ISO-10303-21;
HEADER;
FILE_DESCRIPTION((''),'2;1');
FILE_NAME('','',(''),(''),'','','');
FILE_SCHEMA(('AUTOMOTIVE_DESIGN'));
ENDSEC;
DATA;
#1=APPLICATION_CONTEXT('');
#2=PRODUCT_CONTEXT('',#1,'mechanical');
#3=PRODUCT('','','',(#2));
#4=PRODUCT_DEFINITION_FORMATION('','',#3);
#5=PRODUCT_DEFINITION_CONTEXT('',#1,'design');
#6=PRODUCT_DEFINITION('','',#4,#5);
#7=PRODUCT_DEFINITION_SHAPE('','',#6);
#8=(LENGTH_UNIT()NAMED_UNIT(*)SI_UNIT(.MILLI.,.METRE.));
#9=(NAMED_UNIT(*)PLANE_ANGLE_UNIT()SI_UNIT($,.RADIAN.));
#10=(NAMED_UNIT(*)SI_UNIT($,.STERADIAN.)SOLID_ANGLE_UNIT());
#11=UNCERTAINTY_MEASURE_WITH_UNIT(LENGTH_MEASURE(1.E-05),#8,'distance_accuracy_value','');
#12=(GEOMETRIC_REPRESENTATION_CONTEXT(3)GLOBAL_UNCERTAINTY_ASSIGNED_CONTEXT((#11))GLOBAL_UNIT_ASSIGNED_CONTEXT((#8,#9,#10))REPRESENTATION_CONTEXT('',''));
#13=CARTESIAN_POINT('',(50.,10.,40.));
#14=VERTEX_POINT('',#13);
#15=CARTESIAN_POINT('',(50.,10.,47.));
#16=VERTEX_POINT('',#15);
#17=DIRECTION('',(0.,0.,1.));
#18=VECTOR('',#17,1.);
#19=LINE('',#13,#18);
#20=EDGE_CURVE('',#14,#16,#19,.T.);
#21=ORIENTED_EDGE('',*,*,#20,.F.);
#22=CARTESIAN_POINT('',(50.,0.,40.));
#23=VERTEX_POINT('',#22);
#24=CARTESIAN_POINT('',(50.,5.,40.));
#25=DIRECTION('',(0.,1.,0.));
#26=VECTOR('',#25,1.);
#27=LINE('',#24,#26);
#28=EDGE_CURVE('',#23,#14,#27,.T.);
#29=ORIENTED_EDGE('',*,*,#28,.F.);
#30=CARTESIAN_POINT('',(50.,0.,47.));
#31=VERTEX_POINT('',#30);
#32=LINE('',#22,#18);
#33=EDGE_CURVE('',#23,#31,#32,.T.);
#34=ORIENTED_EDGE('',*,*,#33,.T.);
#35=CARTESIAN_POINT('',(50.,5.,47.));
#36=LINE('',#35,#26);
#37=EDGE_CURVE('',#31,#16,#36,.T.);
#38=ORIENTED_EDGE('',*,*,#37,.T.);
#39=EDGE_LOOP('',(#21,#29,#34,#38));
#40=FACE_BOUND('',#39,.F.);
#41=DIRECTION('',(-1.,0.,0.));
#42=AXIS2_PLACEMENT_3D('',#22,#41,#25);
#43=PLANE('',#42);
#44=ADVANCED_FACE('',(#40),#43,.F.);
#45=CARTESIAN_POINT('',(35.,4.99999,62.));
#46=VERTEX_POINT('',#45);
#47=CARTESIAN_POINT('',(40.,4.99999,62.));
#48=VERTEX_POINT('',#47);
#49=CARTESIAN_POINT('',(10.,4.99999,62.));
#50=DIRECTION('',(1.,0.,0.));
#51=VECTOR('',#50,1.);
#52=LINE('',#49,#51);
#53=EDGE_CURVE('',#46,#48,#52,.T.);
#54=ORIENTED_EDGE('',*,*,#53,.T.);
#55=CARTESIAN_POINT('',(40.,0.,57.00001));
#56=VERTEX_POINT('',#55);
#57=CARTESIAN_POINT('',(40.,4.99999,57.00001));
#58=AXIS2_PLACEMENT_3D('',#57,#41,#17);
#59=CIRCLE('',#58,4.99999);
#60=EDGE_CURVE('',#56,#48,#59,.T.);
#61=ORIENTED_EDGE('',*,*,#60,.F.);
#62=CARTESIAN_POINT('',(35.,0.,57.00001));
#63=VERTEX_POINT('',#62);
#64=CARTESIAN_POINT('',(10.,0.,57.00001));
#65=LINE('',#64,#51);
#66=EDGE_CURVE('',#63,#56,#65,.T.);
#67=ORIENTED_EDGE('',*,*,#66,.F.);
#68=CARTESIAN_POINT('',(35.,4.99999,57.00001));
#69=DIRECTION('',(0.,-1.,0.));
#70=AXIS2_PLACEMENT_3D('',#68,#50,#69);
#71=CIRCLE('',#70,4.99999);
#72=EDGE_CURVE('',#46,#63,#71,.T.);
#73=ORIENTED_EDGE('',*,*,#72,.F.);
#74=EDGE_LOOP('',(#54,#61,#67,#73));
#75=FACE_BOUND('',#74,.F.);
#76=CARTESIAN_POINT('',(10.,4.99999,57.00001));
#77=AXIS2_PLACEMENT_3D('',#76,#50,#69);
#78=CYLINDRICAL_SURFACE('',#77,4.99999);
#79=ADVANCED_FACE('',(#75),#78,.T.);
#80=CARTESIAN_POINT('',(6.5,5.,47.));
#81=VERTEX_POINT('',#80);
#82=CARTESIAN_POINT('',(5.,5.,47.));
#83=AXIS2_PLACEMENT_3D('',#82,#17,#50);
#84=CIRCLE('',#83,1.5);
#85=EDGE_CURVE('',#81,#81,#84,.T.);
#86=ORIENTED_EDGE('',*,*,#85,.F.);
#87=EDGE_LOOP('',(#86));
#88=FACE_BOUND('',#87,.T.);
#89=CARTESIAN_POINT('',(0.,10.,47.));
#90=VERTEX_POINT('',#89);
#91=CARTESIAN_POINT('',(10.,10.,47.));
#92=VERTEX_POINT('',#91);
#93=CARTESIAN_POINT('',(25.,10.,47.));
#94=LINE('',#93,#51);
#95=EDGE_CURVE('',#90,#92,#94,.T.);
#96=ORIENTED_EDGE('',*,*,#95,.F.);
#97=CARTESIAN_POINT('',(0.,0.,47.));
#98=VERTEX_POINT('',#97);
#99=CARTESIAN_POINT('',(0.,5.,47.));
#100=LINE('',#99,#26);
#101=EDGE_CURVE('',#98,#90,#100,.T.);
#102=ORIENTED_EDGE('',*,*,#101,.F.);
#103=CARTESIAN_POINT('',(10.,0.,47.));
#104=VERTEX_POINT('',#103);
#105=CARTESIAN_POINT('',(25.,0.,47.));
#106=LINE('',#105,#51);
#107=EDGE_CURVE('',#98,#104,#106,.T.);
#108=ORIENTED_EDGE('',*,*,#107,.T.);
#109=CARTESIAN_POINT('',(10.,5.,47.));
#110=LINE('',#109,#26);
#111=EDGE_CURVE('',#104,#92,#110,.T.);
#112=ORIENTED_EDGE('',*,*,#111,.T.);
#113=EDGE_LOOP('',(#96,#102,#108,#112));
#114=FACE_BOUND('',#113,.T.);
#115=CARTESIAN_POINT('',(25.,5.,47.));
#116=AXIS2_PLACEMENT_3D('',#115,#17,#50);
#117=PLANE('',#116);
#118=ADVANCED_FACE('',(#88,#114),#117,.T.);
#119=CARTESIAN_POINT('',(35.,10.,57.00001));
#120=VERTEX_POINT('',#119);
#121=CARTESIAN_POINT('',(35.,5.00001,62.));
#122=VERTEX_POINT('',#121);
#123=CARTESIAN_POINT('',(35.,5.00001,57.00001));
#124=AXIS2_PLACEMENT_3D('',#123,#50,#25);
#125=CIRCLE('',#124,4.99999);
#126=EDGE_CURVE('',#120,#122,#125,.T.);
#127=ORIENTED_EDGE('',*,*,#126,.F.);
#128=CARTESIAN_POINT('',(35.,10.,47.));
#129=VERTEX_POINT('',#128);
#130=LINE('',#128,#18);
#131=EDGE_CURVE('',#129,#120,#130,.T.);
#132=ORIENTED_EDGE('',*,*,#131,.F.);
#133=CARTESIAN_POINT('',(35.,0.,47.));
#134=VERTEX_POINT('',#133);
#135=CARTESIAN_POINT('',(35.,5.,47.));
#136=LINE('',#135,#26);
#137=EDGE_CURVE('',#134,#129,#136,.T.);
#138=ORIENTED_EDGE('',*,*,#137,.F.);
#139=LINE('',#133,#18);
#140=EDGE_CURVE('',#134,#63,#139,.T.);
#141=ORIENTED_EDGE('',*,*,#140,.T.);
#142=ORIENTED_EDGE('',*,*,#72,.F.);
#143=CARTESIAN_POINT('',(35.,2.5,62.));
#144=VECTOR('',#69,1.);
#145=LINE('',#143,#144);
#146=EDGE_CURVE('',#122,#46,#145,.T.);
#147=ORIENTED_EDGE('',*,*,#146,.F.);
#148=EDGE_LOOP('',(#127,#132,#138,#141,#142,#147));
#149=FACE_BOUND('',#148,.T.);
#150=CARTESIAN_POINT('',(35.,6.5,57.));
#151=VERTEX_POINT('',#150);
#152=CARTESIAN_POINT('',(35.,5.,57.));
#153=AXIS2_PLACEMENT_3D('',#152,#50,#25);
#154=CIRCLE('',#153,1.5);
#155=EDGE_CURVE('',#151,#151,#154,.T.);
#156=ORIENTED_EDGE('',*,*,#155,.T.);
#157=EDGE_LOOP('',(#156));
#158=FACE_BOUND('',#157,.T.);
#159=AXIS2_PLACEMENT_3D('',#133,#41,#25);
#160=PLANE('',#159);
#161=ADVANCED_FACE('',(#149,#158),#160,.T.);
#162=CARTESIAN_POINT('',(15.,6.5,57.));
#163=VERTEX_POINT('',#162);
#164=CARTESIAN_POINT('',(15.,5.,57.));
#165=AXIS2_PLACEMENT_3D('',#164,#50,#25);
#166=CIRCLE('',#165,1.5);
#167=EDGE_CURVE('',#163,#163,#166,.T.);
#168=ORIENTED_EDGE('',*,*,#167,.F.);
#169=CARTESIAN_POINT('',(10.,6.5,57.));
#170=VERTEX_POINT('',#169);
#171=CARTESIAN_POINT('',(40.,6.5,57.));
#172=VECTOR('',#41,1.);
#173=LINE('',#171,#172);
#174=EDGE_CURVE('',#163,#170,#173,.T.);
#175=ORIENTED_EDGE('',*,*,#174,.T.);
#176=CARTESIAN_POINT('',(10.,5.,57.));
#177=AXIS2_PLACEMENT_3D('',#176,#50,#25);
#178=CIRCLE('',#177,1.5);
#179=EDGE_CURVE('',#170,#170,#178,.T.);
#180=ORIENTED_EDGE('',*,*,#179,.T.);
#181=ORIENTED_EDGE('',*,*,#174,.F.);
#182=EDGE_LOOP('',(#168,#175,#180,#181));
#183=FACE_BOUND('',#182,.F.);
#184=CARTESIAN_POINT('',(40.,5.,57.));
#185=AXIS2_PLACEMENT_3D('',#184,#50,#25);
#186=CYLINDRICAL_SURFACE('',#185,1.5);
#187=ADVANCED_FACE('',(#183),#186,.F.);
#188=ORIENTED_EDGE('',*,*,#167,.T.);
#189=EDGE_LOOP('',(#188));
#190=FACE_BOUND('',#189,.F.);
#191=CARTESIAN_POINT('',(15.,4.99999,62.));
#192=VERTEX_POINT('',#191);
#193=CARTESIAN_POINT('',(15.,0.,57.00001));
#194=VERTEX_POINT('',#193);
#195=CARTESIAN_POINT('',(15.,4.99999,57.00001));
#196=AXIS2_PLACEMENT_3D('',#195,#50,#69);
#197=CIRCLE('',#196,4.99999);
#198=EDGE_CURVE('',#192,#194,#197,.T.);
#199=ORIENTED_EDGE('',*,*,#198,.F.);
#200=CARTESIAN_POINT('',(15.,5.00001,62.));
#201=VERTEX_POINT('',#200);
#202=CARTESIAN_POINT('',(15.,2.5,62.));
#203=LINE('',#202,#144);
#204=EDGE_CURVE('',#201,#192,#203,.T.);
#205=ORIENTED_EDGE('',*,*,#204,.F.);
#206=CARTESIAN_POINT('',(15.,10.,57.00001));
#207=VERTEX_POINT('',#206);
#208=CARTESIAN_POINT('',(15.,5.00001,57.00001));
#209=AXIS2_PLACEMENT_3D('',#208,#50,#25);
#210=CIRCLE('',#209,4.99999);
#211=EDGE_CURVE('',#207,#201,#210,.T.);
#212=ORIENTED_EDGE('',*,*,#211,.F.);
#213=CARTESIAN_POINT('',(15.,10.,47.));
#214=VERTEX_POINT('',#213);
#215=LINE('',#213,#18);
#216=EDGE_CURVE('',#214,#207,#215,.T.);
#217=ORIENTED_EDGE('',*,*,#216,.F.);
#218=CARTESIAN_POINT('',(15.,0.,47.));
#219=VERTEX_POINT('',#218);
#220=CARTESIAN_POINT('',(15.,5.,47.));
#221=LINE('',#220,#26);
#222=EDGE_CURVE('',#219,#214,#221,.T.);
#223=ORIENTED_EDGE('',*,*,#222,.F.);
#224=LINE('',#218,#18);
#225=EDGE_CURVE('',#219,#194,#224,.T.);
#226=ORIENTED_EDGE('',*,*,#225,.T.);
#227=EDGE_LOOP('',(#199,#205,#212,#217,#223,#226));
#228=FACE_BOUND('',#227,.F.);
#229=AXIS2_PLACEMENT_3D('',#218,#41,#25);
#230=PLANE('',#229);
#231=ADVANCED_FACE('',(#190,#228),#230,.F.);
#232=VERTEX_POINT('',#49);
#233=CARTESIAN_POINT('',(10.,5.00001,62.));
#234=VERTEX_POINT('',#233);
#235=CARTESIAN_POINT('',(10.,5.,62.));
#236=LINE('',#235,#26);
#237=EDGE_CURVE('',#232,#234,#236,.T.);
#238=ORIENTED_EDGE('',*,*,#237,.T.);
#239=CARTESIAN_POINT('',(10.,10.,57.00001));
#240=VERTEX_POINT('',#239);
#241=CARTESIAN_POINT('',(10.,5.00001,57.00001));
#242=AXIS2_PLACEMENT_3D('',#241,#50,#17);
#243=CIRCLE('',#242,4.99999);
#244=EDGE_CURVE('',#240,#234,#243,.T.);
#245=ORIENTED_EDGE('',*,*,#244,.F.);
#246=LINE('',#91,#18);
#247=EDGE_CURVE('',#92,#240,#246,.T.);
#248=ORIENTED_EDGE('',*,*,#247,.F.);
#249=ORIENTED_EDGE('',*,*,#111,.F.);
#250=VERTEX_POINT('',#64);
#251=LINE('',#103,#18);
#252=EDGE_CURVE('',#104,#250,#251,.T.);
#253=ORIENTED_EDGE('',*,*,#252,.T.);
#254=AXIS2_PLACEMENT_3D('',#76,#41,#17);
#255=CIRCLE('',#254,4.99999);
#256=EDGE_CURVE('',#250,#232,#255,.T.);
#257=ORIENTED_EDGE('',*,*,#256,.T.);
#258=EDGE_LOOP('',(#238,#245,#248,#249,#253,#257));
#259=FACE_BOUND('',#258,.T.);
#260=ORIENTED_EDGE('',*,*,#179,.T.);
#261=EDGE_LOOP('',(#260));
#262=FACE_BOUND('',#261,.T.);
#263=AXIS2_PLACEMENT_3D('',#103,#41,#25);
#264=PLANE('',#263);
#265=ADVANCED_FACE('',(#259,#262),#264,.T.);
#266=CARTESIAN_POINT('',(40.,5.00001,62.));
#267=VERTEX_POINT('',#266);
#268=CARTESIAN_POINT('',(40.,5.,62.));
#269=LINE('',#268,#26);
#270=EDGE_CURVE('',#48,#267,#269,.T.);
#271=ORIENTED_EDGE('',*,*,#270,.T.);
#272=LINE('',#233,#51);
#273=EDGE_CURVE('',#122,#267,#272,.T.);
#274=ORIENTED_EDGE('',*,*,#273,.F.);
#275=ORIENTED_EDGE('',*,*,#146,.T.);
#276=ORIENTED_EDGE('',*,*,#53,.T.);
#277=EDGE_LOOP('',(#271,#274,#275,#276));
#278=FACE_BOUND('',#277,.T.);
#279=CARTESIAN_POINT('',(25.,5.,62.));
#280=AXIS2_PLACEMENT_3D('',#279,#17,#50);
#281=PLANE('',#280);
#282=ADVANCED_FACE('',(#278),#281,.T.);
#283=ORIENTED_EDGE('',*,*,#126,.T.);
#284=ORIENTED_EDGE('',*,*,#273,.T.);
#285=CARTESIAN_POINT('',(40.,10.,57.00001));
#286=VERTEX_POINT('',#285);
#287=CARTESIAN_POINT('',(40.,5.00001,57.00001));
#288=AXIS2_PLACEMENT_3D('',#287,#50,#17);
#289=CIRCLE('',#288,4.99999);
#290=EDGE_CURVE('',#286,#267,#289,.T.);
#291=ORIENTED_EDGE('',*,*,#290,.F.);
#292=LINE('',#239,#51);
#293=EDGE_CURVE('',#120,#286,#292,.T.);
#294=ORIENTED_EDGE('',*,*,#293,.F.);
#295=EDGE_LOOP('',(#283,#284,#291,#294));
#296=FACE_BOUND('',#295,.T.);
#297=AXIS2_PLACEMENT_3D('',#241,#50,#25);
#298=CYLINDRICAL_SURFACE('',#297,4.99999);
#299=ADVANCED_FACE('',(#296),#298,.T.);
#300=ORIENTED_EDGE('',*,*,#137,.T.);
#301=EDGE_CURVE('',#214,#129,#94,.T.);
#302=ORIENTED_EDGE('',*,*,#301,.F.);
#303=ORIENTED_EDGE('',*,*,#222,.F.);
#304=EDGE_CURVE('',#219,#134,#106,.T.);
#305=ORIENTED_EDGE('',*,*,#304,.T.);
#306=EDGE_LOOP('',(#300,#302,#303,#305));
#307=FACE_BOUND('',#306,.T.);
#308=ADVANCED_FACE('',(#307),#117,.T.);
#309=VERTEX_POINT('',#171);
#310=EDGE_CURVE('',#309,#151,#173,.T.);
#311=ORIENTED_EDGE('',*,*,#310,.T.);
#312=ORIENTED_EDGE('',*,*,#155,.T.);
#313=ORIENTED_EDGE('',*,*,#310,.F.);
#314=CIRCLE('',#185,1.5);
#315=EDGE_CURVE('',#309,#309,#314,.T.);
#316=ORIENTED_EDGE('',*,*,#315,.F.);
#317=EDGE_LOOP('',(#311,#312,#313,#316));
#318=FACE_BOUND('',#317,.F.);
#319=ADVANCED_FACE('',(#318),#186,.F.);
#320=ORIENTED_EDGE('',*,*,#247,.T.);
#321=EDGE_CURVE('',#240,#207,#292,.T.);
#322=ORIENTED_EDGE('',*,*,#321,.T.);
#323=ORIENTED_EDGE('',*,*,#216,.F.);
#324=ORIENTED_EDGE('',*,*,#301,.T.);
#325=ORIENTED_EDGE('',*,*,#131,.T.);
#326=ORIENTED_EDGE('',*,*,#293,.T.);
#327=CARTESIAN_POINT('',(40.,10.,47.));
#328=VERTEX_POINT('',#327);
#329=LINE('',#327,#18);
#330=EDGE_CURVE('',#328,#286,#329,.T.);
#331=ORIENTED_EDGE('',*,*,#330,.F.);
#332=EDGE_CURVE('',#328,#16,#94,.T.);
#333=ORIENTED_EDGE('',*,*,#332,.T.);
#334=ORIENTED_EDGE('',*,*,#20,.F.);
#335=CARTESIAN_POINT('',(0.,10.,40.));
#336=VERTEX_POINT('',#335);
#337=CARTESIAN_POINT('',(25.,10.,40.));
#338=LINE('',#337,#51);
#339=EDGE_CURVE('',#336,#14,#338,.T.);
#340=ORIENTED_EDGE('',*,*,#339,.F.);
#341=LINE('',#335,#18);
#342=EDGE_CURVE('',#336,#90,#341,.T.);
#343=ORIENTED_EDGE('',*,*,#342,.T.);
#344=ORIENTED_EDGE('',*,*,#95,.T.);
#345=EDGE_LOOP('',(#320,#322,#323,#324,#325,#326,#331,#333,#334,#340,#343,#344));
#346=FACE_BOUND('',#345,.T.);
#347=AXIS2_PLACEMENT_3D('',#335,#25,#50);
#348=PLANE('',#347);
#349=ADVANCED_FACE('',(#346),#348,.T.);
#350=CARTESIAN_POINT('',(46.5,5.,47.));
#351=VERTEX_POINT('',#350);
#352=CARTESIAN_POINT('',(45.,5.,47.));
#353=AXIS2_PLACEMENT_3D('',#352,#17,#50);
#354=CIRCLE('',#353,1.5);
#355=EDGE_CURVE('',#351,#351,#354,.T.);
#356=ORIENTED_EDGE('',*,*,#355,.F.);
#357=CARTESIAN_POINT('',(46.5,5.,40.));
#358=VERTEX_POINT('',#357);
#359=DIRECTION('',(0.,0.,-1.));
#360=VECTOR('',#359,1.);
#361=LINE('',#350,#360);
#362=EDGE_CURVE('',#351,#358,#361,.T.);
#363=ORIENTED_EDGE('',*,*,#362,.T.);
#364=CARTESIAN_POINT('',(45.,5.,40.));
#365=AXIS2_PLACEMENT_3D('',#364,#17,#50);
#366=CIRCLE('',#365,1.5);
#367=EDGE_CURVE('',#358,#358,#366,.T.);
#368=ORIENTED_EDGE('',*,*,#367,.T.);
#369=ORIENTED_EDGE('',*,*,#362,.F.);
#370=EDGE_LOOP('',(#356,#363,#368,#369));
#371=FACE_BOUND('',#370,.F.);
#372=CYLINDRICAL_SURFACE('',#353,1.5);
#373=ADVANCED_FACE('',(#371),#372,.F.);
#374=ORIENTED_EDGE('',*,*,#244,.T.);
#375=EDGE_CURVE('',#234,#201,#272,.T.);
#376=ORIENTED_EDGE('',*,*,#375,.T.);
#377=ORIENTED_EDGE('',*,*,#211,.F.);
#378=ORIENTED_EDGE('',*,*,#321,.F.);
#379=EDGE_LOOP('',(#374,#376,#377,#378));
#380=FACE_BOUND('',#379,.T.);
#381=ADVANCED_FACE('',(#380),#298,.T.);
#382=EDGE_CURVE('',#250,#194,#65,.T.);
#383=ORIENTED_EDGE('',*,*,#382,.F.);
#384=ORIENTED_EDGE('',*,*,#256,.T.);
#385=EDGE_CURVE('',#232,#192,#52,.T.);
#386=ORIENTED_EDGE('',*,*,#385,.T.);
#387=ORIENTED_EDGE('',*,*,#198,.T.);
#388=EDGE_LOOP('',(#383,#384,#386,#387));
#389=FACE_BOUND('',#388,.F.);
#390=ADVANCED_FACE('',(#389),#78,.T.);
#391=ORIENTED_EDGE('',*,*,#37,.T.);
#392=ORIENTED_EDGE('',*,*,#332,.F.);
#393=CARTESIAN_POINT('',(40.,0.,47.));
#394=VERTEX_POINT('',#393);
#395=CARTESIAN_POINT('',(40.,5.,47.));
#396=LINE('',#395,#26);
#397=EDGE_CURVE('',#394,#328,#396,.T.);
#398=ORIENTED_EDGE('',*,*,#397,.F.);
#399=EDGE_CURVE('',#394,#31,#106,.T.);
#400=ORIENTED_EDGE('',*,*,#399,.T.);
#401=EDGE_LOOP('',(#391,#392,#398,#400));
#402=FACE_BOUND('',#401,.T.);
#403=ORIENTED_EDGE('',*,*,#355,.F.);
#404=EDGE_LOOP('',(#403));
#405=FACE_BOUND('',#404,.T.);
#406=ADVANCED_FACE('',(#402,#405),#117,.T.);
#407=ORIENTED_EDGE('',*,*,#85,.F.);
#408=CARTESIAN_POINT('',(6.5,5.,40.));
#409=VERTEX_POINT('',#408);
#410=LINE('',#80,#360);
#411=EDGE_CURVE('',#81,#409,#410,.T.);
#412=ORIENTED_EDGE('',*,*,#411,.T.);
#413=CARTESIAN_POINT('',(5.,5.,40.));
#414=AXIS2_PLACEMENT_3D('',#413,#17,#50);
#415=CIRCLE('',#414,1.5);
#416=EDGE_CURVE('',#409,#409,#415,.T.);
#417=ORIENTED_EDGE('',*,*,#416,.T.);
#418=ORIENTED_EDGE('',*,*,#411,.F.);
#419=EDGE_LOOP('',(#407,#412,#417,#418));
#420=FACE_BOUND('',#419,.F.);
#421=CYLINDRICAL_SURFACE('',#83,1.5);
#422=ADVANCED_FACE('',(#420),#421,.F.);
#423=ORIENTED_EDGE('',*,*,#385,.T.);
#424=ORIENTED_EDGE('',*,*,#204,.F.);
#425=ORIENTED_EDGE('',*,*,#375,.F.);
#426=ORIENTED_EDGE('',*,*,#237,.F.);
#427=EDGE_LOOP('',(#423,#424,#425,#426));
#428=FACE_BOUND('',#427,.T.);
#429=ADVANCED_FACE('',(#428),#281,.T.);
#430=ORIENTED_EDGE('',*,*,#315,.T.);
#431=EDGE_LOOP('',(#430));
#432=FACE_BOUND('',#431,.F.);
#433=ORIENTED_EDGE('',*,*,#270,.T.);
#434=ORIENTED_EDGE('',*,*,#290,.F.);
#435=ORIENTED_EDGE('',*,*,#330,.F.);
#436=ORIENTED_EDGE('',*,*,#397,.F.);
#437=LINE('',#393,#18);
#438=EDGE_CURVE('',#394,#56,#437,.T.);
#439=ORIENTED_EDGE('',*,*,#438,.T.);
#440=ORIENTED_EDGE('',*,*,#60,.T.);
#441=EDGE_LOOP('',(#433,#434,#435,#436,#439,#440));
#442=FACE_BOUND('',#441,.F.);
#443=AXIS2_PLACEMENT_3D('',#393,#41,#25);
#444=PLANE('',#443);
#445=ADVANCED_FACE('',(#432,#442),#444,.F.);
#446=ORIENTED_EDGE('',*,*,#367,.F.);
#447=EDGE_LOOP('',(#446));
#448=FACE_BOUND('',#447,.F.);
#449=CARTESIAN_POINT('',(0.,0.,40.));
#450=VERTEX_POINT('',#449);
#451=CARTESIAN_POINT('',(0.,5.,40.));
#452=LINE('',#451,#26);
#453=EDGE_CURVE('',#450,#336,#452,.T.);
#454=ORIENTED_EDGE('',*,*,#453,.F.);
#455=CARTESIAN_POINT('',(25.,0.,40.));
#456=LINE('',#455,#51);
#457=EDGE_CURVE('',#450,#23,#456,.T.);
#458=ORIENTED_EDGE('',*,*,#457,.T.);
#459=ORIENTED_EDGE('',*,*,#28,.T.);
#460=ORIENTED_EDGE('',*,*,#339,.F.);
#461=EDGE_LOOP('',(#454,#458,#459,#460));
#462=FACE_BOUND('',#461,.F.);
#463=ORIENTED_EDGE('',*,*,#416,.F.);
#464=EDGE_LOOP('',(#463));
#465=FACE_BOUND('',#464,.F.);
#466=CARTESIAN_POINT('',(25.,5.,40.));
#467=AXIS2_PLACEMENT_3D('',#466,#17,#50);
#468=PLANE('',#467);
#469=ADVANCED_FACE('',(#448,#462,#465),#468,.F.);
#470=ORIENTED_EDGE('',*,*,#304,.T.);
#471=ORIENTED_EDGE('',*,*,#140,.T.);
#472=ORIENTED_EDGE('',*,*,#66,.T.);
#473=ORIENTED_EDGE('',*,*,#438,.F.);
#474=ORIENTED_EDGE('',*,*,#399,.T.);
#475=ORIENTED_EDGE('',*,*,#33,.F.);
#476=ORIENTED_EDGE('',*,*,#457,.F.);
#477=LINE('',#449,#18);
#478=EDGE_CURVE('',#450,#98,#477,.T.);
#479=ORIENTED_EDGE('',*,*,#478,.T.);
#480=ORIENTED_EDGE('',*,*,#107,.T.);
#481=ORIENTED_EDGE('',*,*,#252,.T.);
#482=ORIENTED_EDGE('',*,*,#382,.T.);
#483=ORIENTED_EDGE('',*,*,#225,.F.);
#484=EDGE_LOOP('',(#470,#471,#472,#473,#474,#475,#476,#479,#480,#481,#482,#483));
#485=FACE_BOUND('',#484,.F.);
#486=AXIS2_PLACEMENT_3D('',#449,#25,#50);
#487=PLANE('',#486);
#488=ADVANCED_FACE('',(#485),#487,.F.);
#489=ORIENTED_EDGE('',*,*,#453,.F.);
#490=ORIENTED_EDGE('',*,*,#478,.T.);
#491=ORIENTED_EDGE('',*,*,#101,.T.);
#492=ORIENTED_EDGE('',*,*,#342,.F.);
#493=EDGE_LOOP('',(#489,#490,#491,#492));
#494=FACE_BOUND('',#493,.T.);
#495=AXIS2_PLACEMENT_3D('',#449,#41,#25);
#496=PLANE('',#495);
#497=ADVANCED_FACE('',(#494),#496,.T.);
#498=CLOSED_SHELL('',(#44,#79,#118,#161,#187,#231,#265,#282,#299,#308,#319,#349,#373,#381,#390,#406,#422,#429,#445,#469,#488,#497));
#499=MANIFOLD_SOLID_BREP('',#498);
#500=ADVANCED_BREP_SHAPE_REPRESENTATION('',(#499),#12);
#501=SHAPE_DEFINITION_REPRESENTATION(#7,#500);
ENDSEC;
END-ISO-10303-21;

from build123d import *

# Parameters (mm, degrees)
F0_W      = 50
F0_H      = 10
F1_DEPTH  = 7
F2_W      = 30
F2_H      = 10
F4_DEPTH  = 15
F5_R      = 4.99999
F3_R      = 1.5
F6_DEPTH  = 25
F7_R      = 1.5
F8_DEPTH  = 50
F10_W     = 20
F10_H     = 10
F11_DEPTH = 25


# Not quite as in the source:
# - a fillet or chamfer is up to 0.001 mm smaller than in the source, because OpenCascade refuses the exact size


with BuildPart() as f1:
    # F0 (on Top) → F1 (new body)
    with BuildSketch(Plane.XY):
        with Locations((25, 5)):
            Rectangle(F0_W, F0_H)
    extrude(amount=F1_DEPTH)

    # F2 (on face) → F4 (join)
    with BuildSketch(Plane.XY.offset(7)):
        with Locations((25, 5)):
            Rectangle(F2_W, F2_H)
    extrude(amount=F4_DEPTH)

    # F5 (radius 5 in the source; OpenCascade refuses exactly that, so slightly less here)
    f5_edges = [f1.edges().sort_by_distance(p)[0] for p in [
        (25, 10, 22),
        (25, 0, 22),
    ]]
    fillet(f5_edges, radius=F5_R)

    # F3 (on face) → F6 (cut)
    with BuildSketch(Plane.XY.offset(7)):
        with Locations((45, 5)):
            Circle(F3_R)
        with Locations((5, 5)):
            Circle(F3_R)
    extrude(amount=-F6_DEPTH, mode=Mode.SUBTRACT)

    # F7 (on face) → F8 (cut)
    with BuildSketch(Plane.YZ.offset(40)):
        with Locations((5, 17)):
            Circle(F7_R)
    extrude(amount=-F8_DEPTH, mode=Mode.SUBTRACT)


with BuildPart() as f9_1:
    # F9: copy of F1
    add(f1.part.moved(Location((0, 0, 40))))

    # F10 (on face) → F11 (cut)
    with BuildSketch(Plane.XY.offset(47)):
        with Locations((25, 5)):
            Rectangle(F10_W, F10_H)
    extrude(amount=F11_DEPTH, mode=Mode.SUBTRACT)


solid = f9_1.part
